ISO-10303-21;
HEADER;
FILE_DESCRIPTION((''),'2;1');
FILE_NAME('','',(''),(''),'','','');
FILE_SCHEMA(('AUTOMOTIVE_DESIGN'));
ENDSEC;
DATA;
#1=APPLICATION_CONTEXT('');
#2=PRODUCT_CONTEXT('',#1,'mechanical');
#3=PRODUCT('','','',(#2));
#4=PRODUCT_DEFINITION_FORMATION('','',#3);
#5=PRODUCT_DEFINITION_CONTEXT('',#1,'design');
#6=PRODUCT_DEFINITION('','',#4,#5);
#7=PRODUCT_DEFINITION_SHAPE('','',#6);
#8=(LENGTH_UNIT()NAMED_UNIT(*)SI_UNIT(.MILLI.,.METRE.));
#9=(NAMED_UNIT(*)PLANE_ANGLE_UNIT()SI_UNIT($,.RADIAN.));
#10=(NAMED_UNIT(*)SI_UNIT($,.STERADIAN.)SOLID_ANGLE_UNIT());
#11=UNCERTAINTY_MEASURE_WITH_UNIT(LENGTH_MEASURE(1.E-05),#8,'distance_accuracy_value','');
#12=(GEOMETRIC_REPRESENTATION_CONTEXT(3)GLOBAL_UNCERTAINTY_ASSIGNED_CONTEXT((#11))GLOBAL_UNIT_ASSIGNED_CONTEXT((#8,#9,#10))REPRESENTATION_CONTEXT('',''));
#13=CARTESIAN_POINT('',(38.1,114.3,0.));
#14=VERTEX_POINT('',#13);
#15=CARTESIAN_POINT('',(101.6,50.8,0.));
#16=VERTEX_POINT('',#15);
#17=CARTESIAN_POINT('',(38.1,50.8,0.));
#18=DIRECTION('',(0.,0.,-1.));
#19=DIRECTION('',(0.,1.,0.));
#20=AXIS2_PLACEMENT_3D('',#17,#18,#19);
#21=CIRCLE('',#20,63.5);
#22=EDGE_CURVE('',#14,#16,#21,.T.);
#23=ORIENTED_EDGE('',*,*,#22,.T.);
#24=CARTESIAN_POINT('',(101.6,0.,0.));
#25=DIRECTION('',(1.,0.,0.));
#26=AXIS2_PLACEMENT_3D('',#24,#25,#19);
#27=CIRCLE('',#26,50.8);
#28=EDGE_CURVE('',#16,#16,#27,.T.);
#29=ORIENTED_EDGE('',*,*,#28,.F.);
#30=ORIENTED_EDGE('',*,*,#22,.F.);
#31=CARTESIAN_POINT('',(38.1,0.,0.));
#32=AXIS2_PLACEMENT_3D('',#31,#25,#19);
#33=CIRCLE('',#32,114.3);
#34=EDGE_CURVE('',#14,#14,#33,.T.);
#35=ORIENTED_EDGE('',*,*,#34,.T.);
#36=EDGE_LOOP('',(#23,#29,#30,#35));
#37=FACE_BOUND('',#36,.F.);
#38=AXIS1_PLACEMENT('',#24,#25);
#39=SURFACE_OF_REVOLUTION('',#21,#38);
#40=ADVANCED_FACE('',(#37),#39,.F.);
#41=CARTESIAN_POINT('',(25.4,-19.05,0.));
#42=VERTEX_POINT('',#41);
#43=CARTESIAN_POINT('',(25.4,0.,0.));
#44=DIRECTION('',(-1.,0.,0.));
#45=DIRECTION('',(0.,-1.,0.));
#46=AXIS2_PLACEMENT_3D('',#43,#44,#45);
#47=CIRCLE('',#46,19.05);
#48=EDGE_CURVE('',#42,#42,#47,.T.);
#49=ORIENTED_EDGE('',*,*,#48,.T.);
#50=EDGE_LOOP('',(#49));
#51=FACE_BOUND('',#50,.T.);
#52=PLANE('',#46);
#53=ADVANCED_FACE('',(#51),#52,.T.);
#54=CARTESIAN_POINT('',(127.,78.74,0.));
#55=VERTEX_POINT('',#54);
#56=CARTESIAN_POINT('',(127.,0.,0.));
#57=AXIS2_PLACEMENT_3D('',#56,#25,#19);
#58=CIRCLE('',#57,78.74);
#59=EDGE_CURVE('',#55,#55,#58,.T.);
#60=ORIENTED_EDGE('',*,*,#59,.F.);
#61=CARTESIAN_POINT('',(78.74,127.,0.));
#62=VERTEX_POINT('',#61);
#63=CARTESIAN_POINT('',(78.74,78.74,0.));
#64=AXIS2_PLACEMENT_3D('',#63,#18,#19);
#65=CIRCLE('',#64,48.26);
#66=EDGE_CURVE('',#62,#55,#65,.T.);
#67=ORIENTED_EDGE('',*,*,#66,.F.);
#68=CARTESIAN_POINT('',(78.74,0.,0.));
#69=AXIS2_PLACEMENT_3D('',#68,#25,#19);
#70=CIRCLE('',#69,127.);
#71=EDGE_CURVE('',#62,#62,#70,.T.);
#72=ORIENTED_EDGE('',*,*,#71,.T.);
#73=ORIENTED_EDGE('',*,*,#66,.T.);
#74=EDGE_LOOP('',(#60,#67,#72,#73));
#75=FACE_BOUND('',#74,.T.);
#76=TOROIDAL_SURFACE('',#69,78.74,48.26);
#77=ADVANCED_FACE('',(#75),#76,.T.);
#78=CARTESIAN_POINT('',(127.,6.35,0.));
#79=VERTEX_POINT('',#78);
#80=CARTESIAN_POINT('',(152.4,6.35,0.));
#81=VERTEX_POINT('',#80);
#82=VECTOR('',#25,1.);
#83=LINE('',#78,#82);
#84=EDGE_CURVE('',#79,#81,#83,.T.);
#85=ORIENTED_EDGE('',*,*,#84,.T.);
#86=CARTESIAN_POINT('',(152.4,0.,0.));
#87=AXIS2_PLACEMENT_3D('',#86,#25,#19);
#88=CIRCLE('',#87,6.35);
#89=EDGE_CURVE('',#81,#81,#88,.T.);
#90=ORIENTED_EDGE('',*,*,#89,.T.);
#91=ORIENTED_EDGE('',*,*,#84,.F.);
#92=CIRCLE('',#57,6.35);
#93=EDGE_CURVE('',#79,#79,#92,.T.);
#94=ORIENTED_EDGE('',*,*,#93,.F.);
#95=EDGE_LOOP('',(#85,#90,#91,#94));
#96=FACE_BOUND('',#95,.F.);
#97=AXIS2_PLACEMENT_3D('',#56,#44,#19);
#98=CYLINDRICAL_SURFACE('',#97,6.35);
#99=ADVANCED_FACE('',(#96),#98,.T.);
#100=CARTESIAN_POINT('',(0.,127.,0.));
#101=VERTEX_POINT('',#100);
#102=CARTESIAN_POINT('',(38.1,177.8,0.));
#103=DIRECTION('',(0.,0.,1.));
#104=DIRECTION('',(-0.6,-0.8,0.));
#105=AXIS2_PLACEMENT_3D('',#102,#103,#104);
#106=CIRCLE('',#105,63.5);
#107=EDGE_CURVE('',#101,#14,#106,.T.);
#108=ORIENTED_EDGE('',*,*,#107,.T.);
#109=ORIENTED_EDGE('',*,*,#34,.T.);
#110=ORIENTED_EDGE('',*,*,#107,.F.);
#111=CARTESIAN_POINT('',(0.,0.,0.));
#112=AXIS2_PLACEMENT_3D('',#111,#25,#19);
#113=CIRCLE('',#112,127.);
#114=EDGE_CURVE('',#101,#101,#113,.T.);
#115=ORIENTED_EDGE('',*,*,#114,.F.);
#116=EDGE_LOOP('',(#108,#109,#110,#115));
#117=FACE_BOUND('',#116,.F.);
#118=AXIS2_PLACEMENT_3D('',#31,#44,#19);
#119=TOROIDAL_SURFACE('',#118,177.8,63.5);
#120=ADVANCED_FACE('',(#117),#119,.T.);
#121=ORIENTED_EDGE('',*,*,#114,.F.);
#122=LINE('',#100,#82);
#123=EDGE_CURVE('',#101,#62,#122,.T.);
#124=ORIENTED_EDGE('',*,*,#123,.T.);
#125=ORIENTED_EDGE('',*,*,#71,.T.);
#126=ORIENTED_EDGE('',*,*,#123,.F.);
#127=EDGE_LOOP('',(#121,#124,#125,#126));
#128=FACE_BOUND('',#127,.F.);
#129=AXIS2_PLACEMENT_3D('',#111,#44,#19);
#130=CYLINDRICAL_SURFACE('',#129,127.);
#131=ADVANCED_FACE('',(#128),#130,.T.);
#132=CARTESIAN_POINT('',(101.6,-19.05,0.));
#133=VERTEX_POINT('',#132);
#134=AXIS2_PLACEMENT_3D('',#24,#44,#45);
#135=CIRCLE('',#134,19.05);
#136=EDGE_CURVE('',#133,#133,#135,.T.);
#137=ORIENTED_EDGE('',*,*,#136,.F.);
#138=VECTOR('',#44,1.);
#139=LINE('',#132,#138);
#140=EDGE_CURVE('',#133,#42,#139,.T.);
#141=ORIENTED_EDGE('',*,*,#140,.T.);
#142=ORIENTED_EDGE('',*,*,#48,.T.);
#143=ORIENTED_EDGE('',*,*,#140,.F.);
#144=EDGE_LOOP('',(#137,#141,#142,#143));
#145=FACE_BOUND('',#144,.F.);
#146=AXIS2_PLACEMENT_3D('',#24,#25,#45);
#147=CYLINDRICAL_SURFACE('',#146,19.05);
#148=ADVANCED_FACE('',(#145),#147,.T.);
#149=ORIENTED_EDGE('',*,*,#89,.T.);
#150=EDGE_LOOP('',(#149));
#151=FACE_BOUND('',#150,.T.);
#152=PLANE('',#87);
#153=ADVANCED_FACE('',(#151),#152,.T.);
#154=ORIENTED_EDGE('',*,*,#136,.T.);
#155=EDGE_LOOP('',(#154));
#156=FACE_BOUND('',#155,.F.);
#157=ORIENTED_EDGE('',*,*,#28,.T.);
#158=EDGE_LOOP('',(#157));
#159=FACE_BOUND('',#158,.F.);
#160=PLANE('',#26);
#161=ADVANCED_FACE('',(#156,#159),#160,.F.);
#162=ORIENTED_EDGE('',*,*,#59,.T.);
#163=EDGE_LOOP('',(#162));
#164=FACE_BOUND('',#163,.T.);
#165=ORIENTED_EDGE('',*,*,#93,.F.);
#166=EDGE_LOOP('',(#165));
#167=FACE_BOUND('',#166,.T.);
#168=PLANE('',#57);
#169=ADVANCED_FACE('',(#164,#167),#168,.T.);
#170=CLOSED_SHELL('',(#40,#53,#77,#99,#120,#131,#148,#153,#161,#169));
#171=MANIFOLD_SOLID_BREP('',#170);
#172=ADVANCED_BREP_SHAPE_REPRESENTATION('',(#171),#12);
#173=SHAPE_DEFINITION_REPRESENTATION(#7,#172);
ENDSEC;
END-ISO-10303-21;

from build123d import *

# Parameters (mm, degrees)
F0_R     = 127
F1_DEPTH = 127
F2_R     = 114.3
F3_DEPTH = 101.6
F4_R     = 48.26
F6_R     = 6.35
F7_DEPTH = 25.4
F8_R     = 19.05
F9_DEPTH = 76.2


# Not quite as in the source:
# - a fillet or chamfer that OpenCascade refuses, or shapes differently, is made with other operations: its cross-section is extruded or revolved along the edge and cut away or added


with BuildPart() as f1:
    # F0 (on Right) → F1 (new body)
    with BuildSketch(Plane.YZ):
        Circle(F0_R)
    extrude(amount=F1_DEPTH)

    # F2 (on Right) → F3 (cut)
    with BuildSketch(Plane.YZ):
        Circle(F2_R)
    extrude(amount=F3_DEPTH, mode=Mode.SUBTRACT)

    # F4
    f4_edges = [f1.edges().sort_by_distance(p)[0] for p in [
        (127, -127, 0),
    ]]
    fillet(f4_edges, radius=F4_R)

    # F5: fillet of radius 63.5 on 3 edges, made by hand

    # F5_s1 → F5_t2 (revolve)
    with BuildSketch(Plane.XY):
        with BuildLine():
            ThreePointArc((38.1, 114.3), (83.0012806053, 95.7012806053), (101.6, 50.8))
            Line((101.6, 50.8), (101.6, 114.3))
            Line((101.6, 114.3), (38.1, 114.3))
        make_face()
    revolve(axis=Axis((101.6, 0, 0), (1, 0, 0)))

    # F5_s3 → F5_t4 (revolve, cut)
    with BuildSketch(Plane.XY):
        with BuildLine():
            ThreePointArc((0, 127), (18.0195368579, 117.5586105738), (38.1, 114.3))
            Line((38.1, 114.3), (38.1, 107.95))
            Line((38.1, 107.95), (0, 107.95))
            Line((0, 107.95), (-6.35, 114.3))
            ThreePointArc((-6.35, 114.3), (-6.35, 120.65), (-3.81, 121.92))
            Line((-3.81, 121.92), (0, 127))
        make_face()
    revolve(axis=Axis((0, 0, 0), (1, 0, 0)), mode=Mode.SUBTRACT)

    # F6 (on face) → F7 (join)
    with BuildSketch(Plane.YZ.offset(127)):
        Circle(F6_R)
    extrude(amount=F7_DEPTH)

    # F8 (on face) → F9 (join)
    with BuildSketch(Plane(origin=(101.6, 0, 0), x_dir=(0, -1, 0), z_dir=(-1, 0, 0))):
        Circle(F8_R)
    extrude(amount=F9_DEPTH)


solid = f1.part
